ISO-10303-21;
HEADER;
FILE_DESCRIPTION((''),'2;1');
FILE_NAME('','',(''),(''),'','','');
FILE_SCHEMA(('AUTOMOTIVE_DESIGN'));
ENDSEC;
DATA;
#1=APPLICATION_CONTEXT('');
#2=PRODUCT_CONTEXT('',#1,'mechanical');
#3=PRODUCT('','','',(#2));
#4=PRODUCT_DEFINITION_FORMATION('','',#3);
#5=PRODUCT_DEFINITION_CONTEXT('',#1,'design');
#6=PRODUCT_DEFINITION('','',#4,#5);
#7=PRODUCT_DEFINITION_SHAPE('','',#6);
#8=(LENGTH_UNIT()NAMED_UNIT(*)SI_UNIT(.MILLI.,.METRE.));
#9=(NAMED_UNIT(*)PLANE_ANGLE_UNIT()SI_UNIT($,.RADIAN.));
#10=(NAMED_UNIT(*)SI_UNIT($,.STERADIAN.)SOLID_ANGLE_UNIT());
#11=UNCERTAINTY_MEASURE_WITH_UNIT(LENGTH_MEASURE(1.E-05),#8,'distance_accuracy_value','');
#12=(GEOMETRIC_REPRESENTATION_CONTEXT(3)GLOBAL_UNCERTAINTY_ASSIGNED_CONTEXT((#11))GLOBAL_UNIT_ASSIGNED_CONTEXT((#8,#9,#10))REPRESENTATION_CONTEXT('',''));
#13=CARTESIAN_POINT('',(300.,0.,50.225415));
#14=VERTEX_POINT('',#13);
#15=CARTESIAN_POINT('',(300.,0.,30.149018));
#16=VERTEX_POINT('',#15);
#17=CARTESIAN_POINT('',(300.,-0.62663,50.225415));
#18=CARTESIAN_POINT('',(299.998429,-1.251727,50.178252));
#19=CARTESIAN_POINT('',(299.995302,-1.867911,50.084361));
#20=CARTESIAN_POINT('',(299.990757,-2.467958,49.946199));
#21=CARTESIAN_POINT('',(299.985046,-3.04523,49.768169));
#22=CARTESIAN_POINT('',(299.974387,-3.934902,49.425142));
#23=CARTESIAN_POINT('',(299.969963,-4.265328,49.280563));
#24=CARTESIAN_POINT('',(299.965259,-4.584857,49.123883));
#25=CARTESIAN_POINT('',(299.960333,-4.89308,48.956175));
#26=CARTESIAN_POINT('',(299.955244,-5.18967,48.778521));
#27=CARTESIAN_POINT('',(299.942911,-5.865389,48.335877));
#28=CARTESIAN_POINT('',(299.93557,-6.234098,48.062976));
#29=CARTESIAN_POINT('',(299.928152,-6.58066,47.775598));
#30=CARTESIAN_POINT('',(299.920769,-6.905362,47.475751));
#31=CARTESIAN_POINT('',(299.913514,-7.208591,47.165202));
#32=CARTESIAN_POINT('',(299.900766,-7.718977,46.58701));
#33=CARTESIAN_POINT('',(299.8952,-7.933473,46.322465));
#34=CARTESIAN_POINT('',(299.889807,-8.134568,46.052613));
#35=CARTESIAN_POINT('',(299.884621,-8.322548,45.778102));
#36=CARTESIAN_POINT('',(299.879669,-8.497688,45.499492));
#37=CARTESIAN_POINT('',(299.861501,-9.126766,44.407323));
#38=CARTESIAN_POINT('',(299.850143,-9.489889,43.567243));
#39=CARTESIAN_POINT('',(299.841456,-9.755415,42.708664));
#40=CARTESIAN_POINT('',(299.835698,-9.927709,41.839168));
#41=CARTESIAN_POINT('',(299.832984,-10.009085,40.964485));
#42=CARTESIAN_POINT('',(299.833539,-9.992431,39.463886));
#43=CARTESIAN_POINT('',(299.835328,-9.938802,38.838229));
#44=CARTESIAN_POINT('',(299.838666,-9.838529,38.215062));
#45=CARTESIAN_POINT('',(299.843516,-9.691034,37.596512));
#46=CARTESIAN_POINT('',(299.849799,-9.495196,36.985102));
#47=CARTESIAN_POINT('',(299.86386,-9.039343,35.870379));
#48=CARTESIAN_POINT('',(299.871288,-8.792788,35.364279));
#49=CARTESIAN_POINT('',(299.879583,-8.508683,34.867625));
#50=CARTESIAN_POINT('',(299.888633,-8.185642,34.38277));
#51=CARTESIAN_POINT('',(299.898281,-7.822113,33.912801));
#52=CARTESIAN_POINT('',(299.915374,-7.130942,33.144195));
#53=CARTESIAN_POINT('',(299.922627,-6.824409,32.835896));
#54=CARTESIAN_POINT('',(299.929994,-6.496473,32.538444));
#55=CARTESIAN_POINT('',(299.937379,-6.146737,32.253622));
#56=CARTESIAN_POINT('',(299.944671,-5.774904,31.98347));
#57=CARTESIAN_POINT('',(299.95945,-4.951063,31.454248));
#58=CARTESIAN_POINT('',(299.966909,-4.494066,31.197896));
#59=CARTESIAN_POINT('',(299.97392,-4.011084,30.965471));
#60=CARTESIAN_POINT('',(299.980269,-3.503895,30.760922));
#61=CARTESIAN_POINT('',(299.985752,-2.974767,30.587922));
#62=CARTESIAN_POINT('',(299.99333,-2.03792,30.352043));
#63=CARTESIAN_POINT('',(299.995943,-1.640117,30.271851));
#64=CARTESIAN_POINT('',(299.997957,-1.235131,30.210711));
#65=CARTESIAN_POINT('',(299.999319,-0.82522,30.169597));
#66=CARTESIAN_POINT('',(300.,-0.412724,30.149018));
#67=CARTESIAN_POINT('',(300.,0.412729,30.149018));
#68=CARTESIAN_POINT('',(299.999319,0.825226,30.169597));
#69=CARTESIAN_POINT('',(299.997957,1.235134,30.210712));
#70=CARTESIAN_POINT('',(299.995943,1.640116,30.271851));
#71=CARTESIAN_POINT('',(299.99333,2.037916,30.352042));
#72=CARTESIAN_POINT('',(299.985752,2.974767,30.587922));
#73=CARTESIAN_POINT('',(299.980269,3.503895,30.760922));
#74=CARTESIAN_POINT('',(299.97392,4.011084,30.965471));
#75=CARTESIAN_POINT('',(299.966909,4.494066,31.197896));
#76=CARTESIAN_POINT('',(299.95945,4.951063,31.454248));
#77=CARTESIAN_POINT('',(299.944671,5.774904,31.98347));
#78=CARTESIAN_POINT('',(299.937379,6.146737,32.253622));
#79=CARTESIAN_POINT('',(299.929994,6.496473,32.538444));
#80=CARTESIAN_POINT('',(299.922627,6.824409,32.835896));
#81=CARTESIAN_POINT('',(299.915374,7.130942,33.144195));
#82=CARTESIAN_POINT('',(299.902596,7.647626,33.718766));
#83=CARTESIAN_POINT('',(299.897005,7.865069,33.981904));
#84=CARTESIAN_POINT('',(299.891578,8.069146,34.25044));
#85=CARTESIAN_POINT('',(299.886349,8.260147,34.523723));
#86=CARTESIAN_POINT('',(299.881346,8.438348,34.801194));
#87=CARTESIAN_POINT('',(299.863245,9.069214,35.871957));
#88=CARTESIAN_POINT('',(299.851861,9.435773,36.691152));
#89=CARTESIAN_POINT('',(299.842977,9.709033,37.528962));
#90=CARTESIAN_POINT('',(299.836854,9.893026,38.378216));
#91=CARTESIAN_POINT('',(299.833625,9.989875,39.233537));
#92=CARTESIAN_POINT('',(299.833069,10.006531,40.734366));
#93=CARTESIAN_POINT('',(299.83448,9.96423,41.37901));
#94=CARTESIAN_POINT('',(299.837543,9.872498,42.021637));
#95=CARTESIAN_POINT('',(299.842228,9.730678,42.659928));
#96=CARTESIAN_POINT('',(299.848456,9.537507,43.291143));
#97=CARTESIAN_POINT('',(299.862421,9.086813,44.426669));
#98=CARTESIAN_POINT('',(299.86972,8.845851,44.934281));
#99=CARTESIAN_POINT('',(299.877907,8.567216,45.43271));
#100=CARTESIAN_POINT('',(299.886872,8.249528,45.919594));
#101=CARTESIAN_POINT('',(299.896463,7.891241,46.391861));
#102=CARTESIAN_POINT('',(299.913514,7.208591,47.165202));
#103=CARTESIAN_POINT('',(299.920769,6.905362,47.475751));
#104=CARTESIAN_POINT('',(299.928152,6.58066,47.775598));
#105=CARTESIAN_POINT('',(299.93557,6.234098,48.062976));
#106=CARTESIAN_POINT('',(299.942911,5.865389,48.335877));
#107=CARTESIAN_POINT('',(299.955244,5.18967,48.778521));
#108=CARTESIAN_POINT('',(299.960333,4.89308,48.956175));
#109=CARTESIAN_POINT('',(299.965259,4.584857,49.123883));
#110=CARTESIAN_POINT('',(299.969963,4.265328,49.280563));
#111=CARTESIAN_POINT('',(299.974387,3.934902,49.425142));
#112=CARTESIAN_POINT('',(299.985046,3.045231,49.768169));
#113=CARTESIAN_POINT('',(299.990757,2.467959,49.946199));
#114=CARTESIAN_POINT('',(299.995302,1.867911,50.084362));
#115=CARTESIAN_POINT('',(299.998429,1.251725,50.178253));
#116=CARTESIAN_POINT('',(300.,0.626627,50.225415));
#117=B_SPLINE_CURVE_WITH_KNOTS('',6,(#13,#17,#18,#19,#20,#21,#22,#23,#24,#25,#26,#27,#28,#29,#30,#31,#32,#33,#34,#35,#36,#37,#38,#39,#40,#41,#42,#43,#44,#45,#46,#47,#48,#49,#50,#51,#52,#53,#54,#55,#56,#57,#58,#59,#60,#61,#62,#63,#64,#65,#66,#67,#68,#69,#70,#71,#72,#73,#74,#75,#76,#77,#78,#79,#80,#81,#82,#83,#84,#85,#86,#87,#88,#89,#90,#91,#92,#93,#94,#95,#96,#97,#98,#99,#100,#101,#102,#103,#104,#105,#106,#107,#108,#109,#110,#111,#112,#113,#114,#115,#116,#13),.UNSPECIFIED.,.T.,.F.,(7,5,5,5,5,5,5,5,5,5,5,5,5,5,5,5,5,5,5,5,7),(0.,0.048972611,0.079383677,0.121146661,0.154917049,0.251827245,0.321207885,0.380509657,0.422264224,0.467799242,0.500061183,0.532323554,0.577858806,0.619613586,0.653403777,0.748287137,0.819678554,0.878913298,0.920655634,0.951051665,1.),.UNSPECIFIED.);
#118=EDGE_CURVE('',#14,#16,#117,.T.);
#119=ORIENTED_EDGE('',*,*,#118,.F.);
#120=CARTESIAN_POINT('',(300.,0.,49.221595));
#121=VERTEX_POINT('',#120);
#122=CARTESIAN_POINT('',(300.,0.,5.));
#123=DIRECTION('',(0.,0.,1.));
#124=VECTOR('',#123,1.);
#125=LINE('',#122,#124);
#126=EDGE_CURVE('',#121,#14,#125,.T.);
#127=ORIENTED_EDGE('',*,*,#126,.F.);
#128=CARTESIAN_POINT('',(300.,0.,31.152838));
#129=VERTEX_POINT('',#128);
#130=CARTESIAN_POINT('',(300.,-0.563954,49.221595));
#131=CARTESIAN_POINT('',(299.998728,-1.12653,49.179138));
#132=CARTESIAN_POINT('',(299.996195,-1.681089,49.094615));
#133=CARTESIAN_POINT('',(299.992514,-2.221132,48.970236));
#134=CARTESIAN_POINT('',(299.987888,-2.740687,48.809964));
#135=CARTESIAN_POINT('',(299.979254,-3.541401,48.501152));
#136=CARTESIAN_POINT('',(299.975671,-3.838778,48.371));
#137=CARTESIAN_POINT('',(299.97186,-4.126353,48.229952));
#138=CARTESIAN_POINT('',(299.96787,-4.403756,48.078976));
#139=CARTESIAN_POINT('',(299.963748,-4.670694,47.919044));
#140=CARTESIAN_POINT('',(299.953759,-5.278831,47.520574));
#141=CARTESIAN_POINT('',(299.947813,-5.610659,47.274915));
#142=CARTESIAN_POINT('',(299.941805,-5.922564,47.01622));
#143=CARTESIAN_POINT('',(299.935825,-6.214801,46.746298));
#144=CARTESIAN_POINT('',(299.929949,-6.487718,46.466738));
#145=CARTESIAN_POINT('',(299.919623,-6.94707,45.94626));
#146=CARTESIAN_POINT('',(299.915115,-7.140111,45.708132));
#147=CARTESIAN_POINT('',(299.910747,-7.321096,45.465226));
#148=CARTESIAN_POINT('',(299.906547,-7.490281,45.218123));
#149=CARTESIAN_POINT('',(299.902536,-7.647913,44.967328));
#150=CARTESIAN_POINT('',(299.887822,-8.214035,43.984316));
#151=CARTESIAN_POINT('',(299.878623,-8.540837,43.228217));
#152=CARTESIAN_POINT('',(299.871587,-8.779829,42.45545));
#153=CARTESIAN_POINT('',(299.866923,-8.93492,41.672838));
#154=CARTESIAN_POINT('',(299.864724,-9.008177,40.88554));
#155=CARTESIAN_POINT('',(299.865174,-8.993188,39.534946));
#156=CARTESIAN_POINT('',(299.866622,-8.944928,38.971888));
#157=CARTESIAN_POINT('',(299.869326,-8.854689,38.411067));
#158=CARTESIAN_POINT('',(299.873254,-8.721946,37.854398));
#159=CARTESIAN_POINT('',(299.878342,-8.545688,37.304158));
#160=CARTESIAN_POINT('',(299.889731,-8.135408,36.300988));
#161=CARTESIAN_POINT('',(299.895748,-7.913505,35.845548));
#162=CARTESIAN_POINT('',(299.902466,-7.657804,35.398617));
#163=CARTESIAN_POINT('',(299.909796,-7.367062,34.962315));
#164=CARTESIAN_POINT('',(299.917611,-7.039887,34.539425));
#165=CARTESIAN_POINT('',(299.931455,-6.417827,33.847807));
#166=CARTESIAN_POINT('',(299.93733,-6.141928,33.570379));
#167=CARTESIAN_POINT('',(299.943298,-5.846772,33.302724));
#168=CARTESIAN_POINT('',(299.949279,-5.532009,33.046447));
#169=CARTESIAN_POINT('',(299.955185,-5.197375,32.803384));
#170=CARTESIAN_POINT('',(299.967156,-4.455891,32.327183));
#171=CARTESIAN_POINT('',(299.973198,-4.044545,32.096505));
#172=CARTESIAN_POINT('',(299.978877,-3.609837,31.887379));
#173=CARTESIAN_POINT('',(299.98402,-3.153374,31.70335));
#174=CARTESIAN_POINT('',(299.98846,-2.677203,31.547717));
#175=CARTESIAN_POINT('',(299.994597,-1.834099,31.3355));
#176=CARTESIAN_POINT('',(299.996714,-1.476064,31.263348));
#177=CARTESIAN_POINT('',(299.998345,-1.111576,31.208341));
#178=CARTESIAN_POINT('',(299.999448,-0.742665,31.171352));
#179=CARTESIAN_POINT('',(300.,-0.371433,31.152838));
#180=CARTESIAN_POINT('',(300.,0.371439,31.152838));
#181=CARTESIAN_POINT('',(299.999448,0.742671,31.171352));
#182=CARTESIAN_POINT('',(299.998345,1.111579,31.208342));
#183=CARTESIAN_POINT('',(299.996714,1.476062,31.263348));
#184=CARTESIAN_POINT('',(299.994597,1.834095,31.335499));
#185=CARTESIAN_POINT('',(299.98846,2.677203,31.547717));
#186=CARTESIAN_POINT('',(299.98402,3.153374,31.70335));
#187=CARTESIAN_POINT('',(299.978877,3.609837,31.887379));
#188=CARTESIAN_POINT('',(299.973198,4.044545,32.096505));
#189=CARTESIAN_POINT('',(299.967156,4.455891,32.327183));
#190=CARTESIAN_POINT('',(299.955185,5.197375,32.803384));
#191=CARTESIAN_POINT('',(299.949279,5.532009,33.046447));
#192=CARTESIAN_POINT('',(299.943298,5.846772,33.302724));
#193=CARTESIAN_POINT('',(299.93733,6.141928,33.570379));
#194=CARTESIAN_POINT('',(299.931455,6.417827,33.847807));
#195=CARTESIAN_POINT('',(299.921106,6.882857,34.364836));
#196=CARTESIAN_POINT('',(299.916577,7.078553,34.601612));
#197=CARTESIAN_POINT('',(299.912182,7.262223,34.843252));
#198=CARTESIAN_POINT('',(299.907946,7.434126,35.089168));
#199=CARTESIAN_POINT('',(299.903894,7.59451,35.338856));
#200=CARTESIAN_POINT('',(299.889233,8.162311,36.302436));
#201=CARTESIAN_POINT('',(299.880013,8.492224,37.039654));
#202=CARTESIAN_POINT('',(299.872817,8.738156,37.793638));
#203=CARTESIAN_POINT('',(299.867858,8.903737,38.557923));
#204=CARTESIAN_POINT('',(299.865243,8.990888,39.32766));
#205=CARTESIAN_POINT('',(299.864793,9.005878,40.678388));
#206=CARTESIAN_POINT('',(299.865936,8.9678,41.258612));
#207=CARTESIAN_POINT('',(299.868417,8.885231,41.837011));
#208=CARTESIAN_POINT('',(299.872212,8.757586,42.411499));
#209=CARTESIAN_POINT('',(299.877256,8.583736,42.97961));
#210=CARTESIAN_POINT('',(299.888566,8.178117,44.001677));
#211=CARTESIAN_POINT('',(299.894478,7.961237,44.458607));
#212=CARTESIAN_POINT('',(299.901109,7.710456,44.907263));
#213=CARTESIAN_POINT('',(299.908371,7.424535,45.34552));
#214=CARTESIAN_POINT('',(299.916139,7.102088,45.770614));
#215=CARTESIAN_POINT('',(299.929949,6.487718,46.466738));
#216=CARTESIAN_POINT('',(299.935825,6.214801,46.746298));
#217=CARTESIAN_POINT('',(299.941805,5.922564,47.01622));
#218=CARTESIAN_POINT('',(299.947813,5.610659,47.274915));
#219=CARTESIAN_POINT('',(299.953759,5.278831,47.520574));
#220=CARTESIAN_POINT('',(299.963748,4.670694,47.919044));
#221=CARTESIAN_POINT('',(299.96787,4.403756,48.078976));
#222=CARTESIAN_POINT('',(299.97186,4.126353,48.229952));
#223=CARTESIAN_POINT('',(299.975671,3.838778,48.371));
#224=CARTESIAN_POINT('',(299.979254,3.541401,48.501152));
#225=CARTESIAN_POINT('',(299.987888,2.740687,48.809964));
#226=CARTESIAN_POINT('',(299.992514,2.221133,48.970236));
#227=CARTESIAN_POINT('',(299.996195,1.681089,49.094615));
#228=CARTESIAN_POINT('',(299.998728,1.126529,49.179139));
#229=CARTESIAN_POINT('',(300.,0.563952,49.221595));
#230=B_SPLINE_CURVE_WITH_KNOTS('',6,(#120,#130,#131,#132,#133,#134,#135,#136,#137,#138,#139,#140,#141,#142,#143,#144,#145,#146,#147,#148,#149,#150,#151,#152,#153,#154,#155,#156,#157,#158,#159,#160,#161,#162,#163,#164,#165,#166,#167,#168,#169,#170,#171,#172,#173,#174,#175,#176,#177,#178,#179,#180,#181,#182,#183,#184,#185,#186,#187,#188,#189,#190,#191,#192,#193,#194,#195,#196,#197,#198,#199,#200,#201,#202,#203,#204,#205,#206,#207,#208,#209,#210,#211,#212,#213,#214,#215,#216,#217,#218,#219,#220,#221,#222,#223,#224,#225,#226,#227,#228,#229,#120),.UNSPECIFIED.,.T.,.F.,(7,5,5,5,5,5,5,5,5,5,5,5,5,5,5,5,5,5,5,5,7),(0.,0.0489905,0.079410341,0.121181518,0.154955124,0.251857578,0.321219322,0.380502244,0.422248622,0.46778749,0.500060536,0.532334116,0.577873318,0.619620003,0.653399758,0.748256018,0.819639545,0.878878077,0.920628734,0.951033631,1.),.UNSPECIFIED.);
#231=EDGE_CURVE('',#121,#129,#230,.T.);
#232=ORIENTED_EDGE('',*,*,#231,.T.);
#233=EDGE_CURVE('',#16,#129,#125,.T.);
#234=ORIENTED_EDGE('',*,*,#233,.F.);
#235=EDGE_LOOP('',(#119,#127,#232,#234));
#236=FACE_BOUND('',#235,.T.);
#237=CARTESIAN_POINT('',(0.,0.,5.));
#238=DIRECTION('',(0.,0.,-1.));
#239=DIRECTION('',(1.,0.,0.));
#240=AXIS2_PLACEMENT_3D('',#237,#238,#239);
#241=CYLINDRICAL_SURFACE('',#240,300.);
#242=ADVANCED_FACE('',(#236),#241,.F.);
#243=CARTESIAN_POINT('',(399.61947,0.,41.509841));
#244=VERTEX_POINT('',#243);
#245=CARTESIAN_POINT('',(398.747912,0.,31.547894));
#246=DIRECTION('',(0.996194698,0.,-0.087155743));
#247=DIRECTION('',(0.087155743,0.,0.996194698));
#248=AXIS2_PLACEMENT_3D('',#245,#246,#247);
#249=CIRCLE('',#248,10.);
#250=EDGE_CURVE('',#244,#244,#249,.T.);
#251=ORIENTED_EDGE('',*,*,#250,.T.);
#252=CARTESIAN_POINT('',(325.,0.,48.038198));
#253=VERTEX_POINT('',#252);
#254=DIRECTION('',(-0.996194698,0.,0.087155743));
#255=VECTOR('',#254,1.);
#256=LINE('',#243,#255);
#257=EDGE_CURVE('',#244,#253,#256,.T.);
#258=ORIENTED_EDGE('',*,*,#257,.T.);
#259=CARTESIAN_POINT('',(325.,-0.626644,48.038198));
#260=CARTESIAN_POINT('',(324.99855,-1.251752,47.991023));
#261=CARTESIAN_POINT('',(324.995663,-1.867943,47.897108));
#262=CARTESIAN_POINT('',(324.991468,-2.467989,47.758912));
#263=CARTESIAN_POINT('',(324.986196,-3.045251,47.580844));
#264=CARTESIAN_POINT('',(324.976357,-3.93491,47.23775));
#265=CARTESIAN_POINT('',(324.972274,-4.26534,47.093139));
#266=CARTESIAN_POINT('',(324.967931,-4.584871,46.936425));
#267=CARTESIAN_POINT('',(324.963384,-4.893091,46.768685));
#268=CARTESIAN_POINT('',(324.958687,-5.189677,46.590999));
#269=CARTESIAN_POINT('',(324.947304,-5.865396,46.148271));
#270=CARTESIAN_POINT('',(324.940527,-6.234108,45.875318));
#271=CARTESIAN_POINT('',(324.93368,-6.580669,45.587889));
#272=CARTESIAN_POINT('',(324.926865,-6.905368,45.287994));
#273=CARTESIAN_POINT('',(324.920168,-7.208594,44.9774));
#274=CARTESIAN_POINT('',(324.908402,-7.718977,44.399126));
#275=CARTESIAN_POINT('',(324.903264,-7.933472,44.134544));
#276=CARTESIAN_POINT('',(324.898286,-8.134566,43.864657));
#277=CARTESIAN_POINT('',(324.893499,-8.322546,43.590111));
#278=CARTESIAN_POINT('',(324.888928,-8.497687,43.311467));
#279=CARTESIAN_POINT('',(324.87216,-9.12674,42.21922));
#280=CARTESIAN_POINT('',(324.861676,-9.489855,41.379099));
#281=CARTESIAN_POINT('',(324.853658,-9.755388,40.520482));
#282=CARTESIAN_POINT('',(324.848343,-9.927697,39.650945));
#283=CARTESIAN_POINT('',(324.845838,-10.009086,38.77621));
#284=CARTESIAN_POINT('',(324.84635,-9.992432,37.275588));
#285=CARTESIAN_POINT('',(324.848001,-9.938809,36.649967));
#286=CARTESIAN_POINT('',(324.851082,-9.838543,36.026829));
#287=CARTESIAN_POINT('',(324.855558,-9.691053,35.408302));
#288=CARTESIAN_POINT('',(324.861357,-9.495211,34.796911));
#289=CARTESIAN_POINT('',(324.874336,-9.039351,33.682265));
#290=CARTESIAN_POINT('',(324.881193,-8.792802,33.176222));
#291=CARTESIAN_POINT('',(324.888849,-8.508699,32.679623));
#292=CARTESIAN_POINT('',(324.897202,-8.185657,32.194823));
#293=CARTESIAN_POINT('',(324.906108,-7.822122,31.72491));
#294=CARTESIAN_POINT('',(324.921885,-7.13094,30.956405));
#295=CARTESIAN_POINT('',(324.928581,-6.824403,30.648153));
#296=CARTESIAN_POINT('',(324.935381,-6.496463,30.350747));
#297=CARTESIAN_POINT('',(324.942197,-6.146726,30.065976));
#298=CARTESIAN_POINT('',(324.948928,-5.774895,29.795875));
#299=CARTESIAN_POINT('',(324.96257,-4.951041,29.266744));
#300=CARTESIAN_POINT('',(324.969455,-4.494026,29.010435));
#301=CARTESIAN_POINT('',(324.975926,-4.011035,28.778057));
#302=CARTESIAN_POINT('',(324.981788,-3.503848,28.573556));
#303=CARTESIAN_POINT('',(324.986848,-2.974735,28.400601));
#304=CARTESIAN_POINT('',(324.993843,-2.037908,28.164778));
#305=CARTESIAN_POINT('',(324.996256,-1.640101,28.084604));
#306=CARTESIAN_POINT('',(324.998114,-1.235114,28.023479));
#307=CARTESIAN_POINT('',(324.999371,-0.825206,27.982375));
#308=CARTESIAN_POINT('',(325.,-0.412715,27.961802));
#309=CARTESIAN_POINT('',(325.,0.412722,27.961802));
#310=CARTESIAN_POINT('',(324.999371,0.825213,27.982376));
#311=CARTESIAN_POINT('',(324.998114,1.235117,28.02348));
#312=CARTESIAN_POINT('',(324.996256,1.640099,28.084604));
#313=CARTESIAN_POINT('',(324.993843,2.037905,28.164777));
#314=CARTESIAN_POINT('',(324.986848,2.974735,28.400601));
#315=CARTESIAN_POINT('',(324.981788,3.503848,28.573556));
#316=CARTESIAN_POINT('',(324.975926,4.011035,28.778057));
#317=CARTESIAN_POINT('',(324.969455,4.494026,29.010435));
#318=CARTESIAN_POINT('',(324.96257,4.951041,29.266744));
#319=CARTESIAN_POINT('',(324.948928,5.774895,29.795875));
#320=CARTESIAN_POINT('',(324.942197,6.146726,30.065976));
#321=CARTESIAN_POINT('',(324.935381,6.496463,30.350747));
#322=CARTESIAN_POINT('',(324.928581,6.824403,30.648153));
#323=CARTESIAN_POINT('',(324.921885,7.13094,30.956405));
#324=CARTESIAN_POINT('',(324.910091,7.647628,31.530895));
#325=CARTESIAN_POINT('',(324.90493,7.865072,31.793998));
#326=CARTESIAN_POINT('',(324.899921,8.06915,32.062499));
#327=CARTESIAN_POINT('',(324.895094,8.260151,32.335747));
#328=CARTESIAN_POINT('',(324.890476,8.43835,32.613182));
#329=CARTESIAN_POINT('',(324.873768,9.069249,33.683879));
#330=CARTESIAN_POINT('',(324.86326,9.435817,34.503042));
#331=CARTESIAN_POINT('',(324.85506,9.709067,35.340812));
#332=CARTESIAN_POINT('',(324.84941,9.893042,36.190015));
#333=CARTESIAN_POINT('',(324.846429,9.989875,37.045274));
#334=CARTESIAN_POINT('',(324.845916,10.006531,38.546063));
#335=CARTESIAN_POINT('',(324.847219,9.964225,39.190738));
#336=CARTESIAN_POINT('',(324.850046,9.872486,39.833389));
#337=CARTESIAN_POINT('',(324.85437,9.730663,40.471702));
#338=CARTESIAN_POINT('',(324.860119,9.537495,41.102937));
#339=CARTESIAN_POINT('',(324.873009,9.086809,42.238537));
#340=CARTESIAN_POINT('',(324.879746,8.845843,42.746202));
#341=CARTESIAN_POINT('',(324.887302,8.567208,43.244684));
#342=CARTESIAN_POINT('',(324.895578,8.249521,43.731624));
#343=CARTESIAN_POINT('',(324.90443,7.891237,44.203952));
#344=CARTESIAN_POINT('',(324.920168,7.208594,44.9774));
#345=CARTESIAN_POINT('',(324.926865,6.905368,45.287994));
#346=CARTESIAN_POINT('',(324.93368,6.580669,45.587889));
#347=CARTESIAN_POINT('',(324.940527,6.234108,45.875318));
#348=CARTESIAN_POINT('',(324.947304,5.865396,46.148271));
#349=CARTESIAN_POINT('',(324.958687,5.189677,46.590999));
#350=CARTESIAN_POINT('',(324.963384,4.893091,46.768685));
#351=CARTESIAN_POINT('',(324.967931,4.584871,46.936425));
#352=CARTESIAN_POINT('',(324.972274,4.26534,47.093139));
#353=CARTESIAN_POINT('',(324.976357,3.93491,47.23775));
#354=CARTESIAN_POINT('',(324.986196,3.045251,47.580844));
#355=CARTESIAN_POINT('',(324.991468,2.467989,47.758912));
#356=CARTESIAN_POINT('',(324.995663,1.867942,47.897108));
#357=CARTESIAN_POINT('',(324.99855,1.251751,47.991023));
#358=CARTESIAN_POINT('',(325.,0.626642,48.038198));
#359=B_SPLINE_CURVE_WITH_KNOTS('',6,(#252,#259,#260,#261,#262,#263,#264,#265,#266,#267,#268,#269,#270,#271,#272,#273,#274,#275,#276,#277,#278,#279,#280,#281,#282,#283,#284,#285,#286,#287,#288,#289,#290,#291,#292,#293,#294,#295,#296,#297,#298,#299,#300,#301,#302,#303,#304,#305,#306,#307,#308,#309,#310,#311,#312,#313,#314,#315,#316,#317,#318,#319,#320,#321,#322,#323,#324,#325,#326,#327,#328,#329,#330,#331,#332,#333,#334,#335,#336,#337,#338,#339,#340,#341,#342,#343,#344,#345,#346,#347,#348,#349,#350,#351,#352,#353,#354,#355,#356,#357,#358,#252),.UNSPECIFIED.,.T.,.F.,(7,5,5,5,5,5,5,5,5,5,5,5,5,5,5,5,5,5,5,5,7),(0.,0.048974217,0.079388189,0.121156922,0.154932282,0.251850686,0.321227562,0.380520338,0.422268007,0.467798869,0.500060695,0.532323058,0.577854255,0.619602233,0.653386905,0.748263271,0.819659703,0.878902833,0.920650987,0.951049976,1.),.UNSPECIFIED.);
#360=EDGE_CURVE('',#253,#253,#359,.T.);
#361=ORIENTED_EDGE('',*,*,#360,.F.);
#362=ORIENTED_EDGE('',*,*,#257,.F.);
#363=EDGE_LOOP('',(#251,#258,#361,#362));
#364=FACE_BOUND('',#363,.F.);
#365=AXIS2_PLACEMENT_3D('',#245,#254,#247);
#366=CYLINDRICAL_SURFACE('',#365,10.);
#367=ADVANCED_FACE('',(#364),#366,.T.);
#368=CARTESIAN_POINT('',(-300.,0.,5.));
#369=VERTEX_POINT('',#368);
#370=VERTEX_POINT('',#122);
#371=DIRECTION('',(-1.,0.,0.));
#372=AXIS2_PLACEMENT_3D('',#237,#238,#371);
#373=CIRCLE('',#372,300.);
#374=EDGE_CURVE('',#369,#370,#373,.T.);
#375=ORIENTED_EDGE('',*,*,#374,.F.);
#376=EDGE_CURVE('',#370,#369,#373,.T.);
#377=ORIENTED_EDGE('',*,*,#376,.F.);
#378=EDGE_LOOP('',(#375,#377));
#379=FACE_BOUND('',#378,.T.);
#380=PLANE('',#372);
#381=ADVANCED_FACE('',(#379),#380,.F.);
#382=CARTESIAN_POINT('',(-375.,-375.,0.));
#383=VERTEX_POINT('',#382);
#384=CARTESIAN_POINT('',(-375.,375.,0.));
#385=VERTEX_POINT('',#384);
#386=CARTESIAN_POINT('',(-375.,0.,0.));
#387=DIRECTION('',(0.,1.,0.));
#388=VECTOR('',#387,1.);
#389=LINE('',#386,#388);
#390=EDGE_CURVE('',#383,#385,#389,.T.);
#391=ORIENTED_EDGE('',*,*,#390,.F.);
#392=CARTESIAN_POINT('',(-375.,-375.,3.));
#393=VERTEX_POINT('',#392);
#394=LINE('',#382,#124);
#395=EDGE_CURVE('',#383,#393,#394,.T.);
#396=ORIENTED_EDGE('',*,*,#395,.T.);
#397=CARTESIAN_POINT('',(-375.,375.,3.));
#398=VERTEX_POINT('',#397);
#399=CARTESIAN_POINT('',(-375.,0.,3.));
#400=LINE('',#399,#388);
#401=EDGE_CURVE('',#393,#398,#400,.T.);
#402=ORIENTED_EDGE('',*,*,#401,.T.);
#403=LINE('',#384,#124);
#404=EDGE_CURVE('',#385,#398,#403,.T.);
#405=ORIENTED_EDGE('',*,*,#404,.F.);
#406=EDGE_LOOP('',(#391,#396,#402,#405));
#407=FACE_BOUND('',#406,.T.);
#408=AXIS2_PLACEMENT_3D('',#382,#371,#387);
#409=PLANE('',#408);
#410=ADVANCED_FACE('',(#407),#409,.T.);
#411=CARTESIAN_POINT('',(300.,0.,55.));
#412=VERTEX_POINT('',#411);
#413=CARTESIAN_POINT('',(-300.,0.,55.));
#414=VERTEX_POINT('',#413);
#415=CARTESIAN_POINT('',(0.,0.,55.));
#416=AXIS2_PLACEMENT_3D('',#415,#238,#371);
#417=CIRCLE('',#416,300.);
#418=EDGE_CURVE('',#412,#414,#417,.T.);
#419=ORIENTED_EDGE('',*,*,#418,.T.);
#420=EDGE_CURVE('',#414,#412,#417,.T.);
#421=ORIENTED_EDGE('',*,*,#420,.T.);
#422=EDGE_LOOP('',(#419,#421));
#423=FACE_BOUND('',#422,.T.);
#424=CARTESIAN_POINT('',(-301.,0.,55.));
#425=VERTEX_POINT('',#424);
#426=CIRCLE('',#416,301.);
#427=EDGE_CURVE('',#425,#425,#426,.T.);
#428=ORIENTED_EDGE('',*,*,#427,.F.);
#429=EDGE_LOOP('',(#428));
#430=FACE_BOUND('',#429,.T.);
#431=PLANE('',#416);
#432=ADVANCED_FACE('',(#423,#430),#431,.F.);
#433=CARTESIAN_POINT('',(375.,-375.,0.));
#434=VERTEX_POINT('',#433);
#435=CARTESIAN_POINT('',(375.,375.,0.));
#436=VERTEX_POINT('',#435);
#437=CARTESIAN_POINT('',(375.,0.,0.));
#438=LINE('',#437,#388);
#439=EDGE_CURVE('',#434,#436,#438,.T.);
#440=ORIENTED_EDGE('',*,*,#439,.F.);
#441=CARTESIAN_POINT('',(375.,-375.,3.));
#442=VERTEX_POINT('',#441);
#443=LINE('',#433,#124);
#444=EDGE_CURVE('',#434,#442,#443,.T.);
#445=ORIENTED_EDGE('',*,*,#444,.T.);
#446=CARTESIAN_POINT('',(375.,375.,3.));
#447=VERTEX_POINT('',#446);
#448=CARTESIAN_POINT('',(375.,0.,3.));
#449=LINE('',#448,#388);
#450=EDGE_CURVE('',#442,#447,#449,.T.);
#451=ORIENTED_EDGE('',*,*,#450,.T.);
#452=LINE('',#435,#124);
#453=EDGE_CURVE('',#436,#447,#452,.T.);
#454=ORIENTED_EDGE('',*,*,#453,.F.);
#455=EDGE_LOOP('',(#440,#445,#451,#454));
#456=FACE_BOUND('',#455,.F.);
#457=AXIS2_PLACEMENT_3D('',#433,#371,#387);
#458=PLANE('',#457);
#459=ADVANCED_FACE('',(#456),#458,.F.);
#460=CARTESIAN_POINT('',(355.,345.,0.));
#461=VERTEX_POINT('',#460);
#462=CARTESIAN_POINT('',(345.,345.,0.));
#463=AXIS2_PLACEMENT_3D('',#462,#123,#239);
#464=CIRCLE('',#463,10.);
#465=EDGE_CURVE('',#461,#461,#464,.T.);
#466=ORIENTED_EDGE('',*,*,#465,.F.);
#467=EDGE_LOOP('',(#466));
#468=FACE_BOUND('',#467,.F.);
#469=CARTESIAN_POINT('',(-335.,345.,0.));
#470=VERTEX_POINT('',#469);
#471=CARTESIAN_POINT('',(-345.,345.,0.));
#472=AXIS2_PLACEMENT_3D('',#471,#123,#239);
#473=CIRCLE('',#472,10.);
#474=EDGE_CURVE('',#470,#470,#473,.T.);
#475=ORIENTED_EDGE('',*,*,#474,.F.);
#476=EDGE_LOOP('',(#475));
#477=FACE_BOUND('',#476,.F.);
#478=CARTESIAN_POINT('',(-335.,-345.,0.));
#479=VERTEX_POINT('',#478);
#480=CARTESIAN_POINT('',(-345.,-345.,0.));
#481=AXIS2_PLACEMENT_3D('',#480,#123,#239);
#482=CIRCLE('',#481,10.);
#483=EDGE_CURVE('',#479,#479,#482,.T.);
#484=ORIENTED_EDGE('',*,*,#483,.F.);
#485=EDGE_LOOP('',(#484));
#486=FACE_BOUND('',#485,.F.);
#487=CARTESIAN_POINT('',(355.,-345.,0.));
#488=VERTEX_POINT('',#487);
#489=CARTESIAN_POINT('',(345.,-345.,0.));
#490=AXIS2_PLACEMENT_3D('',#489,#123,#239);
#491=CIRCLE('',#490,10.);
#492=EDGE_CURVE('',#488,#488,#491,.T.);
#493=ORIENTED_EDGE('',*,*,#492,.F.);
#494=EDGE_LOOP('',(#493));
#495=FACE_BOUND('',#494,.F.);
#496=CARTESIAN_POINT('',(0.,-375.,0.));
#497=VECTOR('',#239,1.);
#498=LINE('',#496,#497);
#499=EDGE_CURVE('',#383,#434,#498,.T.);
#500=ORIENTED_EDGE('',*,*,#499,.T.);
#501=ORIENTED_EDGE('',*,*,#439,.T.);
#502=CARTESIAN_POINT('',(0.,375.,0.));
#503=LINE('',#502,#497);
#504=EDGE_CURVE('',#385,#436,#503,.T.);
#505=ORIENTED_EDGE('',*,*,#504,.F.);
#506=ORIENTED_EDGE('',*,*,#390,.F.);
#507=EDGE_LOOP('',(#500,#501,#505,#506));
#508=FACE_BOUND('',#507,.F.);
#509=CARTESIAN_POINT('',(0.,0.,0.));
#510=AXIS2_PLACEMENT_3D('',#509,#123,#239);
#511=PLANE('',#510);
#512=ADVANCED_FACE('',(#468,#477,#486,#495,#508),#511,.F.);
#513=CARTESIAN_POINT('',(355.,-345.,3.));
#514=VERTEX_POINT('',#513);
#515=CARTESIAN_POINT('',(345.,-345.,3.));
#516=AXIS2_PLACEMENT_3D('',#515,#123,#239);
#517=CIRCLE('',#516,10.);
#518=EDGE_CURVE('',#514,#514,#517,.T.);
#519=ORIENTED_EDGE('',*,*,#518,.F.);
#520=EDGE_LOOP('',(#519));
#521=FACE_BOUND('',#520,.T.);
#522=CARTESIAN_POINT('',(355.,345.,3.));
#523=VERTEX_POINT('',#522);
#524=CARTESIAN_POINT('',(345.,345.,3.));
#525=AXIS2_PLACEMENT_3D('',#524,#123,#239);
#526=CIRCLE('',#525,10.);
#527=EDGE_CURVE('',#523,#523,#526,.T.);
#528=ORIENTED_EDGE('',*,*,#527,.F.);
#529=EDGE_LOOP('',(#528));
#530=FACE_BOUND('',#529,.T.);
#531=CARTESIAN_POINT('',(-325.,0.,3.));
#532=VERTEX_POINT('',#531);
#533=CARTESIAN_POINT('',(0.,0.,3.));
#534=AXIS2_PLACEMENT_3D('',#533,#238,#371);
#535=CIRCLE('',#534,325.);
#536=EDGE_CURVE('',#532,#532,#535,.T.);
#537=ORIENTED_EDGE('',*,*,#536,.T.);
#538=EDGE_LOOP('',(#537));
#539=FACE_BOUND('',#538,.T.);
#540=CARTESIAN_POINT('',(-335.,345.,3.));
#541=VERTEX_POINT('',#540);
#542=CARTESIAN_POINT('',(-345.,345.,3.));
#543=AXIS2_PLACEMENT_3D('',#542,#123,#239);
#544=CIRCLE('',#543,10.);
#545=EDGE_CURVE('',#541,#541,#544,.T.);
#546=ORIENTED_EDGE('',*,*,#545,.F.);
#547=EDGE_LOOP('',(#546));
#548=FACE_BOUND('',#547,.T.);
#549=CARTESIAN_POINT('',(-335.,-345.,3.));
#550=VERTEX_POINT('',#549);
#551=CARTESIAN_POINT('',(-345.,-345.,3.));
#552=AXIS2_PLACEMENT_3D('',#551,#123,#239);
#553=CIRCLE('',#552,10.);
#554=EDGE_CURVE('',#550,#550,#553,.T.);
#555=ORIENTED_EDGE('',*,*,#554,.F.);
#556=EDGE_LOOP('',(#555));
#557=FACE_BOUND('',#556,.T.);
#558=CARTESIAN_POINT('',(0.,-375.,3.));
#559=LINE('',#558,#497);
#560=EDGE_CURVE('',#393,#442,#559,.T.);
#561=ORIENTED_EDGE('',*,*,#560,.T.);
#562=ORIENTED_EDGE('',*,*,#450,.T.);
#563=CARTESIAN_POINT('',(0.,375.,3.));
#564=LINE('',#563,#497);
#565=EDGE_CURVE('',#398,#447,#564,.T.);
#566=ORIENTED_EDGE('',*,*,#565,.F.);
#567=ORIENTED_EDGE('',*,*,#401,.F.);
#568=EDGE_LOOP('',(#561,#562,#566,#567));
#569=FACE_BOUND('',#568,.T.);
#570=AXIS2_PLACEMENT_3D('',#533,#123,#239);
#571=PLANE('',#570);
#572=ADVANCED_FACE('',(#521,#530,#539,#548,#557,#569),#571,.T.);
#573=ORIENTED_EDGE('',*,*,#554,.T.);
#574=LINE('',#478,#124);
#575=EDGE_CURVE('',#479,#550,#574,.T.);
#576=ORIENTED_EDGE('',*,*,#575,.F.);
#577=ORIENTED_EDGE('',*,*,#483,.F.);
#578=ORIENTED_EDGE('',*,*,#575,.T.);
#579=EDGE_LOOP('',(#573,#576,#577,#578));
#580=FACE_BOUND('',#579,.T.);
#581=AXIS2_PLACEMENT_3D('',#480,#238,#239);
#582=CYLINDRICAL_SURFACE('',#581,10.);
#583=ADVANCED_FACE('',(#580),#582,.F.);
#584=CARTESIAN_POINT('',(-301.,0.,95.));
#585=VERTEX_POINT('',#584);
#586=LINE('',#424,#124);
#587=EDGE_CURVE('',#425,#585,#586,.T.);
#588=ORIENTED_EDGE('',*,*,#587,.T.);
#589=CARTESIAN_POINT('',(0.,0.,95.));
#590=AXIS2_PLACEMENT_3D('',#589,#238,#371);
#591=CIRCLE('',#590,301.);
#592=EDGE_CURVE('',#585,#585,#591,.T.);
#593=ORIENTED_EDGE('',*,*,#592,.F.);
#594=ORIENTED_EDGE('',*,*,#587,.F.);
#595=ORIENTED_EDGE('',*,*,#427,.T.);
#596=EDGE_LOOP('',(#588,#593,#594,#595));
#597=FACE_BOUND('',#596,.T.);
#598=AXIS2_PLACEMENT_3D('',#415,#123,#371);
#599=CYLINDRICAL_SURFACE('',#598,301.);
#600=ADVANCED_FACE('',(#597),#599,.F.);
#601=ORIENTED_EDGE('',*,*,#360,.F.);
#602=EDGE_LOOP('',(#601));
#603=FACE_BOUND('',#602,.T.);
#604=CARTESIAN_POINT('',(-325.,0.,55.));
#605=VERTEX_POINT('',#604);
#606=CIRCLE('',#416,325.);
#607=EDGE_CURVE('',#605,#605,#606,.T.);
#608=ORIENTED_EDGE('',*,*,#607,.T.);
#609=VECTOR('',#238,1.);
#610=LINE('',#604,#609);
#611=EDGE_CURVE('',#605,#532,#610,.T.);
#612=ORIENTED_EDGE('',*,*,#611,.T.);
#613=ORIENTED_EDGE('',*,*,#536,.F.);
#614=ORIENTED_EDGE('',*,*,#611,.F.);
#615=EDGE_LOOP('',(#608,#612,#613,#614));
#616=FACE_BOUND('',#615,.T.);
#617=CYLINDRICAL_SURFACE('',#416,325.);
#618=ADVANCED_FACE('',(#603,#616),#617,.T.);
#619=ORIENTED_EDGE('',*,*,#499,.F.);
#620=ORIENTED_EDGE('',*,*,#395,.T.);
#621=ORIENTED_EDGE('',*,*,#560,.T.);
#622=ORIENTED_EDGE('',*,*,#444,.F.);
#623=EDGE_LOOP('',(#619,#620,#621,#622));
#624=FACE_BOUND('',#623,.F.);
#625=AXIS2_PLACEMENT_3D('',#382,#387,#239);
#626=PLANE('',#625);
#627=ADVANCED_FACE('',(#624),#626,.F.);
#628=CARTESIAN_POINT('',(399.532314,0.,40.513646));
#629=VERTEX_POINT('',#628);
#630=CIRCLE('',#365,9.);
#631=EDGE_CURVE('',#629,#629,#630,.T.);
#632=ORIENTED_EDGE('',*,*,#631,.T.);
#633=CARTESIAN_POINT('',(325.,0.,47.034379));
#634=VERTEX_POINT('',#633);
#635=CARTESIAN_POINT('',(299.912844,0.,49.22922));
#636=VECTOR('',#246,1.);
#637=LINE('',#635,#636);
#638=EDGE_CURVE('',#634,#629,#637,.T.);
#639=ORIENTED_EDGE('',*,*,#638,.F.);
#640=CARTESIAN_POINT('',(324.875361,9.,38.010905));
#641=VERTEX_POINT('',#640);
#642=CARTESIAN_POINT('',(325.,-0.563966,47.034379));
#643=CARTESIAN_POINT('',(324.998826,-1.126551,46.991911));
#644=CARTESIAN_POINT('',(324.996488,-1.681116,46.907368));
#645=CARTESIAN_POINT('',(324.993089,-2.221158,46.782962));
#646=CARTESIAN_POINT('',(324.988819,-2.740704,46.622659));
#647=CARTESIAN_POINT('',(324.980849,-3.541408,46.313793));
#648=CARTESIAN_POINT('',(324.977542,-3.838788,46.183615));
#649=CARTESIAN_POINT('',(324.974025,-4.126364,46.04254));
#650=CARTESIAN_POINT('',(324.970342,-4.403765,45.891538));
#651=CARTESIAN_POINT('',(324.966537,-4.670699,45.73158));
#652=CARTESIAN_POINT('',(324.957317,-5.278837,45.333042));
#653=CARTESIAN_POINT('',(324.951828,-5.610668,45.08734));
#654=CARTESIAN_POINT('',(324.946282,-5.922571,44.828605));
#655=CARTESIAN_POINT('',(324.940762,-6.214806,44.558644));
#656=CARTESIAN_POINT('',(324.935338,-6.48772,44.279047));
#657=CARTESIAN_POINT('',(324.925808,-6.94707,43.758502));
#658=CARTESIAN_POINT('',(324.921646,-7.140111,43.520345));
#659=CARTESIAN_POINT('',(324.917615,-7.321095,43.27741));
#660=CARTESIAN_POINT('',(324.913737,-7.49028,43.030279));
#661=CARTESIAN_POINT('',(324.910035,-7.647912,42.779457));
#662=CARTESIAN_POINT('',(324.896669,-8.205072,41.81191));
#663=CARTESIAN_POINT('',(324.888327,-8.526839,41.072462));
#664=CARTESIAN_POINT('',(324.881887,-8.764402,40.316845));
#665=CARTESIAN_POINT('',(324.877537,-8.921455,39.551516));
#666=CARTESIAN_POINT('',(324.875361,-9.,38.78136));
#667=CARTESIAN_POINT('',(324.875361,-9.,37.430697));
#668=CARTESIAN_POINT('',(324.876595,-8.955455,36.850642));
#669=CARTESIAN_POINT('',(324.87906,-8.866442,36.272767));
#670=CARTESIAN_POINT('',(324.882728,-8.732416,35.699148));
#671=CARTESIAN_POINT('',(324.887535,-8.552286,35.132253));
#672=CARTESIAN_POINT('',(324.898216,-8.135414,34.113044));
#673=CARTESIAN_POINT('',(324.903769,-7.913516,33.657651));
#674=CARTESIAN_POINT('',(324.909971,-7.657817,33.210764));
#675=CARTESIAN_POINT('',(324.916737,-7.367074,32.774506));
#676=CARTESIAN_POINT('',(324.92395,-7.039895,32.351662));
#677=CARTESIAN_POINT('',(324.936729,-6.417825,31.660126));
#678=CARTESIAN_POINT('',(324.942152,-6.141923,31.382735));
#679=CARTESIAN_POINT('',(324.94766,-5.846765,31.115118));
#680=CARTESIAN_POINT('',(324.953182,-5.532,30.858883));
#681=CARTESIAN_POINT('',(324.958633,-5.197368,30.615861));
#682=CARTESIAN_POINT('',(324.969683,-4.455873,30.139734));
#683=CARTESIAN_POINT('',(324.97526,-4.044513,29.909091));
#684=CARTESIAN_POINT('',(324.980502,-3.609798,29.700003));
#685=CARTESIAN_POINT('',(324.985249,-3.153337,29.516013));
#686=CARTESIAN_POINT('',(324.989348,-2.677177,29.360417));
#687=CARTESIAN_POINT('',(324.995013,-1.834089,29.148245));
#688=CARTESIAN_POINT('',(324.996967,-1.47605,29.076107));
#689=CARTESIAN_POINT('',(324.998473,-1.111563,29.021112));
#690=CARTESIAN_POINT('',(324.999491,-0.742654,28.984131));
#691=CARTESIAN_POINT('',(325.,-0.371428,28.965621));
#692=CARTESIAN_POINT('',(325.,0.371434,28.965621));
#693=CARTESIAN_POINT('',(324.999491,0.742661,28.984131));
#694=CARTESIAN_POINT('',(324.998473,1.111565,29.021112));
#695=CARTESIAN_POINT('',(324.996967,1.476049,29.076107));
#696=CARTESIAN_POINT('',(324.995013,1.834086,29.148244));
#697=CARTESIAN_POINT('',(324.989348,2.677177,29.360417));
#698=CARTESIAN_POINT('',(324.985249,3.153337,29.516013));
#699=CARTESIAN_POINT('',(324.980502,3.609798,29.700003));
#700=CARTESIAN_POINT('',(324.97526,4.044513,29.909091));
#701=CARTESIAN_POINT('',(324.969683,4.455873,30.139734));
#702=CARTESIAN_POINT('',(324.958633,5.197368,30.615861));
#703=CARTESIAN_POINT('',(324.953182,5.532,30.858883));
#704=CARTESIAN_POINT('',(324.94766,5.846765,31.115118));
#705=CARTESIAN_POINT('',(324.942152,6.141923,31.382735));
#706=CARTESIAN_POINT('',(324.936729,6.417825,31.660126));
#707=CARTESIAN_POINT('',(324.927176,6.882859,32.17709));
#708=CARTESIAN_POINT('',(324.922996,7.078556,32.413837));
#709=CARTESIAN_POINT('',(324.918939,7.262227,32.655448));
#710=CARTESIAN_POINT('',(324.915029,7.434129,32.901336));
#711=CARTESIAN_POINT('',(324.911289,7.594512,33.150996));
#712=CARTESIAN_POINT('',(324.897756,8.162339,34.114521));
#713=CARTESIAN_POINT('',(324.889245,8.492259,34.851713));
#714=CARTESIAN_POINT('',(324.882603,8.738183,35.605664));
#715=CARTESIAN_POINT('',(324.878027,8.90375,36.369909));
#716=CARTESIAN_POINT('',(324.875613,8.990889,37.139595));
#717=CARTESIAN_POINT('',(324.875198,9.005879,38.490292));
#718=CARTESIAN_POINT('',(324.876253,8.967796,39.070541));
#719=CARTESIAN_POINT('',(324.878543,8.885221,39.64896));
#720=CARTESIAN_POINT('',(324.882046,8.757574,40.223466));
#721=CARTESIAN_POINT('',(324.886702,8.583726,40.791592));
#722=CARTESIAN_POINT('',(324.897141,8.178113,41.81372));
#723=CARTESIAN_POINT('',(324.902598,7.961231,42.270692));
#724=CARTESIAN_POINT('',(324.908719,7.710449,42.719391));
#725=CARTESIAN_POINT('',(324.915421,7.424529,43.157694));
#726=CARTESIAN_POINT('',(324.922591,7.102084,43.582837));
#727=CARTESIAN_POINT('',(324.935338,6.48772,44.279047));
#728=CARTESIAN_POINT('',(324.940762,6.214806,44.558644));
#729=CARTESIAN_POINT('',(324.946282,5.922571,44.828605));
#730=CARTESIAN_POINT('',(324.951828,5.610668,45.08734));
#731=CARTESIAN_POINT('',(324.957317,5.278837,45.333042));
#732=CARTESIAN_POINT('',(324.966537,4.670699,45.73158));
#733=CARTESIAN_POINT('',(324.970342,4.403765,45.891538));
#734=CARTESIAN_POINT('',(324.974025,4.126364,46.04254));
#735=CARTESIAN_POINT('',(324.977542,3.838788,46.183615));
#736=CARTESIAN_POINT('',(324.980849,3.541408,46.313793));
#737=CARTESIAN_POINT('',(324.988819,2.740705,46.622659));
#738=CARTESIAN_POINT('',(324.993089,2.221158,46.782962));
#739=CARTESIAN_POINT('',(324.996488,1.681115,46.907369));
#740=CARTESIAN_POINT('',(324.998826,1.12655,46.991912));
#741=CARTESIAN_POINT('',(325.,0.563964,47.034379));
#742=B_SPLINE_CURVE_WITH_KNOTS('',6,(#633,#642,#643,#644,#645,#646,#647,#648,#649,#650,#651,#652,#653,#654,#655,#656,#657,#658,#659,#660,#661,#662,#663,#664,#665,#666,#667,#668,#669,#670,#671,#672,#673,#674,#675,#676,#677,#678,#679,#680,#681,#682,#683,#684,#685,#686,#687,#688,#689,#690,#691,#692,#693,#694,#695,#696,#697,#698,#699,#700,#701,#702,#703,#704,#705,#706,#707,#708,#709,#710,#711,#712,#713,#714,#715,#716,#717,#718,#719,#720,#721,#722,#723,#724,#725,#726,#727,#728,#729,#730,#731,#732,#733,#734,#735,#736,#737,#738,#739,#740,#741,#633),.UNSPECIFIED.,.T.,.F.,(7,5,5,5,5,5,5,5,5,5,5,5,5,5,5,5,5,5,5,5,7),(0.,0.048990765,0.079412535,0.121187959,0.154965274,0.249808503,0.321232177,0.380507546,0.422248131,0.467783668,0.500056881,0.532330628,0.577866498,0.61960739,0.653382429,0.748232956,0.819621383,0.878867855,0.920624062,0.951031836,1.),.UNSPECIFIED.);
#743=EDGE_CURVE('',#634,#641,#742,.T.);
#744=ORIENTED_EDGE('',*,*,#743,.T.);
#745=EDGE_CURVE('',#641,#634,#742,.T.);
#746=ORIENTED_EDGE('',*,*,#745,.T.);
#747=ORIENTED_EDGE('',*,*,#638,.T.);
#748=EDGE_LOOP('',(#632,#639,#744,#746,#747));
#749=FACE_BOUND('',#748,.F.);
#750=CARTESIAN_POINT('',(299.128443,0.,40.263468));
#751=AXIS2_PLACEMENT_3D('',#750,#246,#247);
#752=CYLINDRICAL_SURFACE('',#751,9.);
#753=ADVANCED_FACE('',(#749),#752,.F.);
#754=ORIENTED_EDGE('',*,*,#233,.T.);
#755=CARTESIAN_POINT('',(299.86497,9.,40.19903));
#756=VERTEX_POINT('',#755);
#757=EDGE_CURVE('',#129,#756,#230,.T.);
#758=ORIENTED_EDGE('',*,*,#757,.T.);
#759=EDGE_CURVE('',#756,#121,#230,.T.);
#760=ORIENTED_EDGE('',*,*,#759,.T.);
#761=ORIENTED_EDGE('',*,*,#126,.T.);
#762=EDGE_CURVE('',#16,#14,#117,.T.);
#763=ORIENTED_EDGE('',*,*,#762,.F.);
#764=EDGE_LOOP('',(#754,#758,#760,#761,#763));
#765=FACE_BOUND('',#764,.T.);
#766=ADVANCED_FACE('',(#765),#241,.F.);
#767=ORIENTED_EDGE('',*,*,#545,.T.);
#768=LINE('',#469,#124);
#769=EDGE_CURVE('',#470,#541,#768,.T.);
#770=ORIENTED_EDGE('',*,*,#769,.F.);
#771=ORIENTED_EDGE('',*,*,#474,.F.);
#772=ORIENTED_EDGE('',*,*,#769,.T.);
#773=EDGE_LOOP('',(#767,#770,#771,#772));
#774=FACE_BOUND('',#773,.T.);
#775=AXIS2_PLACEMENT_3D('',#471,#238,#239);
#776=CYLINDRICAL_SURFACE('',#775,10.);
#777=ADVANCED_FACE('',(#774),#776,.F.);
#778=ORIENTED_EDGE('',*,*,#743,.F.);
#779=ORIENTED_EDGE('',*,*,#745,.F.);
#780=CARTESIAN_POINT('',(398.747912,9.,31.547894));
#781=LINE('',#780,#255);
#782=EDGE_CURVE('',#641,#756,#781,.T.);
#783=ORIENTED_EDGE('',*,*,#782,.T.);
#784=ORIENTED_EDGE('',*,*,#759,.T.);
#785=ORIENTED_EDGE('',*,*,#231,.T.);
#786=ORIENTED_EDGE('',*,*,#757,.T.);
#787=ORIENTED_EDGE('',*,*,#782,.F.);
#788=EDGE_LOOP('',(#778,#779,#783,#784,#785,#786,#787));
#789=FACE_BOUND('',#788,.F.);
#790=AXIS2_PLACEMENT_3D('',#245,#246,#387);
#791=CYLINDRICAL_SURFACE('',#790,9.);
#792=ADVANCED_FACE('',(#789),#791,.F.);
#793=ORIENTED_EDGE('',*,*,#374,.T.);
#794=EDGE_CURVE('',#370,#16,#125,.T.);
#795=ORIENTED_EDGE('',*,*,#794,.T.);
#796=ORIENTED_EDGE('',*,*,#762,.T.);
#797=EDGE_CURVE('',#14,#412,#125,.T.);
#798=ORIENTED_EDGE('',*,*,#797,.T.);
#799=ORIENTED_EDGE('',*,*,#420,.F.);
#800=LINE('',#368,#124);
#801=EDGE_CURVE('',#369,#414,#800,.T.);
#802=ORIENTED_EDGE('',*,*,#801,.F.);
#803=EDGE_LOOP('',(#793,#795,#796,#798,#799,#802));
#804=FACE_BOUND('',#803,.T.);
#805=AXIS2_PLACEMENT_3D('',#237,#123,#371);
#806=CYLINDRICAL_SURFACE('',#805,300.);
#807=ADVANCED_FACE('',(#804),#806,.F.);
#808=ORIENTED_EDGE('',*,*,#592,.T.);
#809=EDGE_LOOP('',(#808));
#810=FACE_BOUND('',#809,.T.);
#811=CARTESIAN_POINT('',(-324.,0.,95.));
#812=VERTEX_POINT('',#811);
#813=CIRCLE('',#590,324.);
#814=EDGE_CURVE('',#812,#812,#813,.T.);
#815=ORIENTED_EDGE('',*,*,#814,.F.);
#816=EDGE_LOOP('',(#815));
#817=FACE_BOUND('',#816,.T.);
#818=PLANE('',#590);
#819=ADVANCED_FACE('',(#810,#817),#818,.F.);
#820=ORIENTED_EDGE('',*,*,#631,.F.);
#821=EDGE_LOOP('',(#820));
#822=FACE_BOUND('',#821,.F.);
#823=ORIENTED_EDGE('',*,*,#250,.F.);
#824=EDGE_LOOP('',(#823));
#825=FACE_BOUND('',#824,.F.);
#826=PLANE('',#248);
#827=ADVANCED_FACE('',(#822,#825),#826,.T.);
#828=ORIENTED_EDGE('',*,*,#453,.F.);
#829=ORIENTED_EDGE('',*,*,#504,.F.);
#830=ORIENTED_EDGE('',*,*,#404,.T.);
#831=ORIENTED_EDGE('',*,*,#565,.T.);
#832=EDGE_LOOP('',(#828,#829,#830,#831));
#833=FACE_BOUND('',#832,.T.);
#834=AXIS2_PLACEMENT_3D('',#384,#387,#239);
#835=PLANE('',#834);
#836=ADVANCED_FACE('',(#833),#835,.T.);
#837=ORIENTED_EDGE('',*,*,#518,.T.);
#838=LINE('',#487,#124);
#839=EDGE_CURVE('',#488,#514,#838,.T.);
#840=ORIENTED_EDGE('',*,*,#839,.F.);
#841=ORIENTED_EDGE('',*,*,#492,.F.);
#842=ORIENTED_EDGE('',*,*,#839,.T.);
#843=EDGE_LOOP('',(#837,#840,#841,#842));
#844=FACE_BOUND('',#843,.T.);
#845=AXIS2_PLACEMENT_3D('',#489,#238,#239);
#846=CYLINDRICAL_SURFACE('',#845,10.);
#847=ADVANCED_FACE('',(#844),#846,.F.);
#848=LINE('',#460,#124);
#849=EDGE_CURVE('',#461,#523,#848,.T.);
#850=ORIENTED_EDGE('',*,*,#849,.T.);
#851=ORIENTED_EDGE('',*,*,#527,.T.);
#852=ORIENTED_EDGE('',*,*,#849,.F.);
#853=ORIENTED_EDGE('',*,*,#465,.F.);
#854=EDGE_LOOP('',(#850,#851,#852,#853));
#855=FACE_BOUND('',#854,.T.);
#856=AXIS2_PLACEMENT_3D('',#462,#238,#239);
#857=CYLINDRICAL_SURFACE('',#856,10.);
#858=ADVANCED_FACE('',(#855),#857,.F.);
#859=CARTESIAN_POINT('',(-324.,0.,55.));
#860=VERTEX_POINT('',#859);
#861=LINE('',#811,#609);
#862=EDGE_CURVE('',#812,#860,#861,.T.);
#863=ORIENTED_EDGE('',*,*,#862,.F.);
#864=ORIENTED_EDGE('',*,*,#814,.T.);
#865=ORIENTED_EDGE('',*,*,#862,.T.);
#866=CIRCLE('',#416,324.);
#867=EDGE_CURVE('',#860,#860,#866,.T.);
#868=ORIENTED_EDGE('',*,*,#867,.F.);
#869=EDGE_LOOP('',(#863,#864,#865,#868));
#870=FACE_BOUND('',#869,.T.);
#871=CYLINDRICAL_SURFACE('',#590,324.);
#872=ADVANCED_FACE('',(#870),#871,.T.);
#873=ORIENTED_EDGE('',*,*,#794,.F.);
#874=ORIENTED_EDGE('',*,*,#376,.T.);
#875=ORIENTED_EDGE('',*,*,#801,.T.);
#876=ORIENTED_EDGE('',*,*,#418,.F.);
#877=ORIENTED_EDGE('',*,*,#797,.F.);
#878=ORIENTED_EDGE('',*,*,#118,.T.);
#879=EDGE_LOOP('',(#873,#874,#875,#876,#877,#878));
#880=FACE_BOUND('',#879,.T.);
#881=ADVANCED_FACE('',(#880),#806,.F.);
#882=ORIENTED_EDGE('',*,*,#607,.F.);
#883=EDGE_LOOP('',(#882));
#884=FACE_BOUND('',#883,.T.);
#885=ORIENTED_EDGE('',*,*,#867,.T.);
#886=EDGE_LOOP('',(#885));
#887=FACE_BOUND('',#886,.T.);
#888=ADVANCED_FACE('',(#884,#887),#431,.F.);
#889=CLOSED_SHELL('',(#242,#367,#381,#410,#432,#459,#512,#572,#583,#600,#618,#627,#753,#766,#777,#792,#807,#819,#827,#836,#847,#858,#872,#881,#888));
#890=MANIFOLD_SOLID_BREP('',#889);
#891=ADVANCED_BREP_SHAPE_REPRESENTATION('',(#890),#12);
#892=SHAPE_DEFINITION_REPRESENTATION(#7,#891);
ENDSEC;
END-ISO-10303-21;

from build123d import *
from build123d import SkipClean  # not in build123d's __all__

# Parameters (mm, degrees)
F0_W     = 10
F0_H     = 3
F2_W     = 750
F2_H     = 750
F2_R     = 10
F3_DEPTH = 3
F6_R     = 9
F7_DEPTH = 120
F8_R     = 300
F9_DEPTH = 200


with BuildPart() as f1:
    # F0 (on Front) → F1 (revolve)
    with BuildSketch(Plane.XZ):
        Polygon((-325, 5), (-300, 5), (-300, 55), (-301, 55), (-301, 95), (-324, 95), (-324, 55), (-325, 55), align=None)
        Polygon((-10, 5), (-300, 5), (-325, 5), (-325, 2), (-10, 2), align=None)
        with Locations((-5, 3.5)):
            Rectangle(F0_W, F0_H)
    revolve(axis=Axis((0, 0, 187.9212413023), (0, 0, -1)))

    # F2 (on Top) → F3 (join)
    with BuildSketch(Plane.XY):
        Rectangle(F2_W, F2_H)
        with Locations((-345, -345)):
            Circle(F2_R, mode=Mode.SUBTRACT)
        with Locations((345, -345)):
            Circle(F2_R, mode=Mode.SUBTRACT)
        with Locations((-345, 345)):
            Circle(F2_R, mode=Mode.SUBTRACT)
        with Locations((345, 345)):
            Circle(F2_R, mode=Mode.SUBTRACT)
    extrude(amount=F3_DEPTH)

    # F4 (on Front) → F5 (revolve)
    with BuildSketch(Plane.XZ):
        Polygon((399.6194698092, 41.5098406888), (300, 50.2254149636), (299.9128442573, 49.2292202655), (399.5323140664, 40.5136459907), align=None)
    revolve(axis=Axis((412.7442754949, 0, 30.3233706049), (0.9961946981, 0, -0.0871557427)))

    # F6 (on face) → F7 (cut)
    with BuildSketch(Plane(origin=(392.9798568705, 0, -34.3812824702), x_dir=(0, 1, 0), z_dir=(0.9961946981, 0, -0.0871557427))):
        with Locations((0, 66.1810149205)):
            Circle(F6_R)
    extrude(amount=-F7_DEPTH, mode=Mode.SUBTRACT)

    # F8 (on face) → F9 (cut)
    with BuildSketch(Plane.XY.offset(5)):
        Circle(F8_R)
    with SkipClean():  # cleaning this boolean's faces spoils the solid; the shape is the same uncleaned
        extrude(amount=F9_DEPTH, mode=Mode.SUBTRACT)


solid = f1.part
